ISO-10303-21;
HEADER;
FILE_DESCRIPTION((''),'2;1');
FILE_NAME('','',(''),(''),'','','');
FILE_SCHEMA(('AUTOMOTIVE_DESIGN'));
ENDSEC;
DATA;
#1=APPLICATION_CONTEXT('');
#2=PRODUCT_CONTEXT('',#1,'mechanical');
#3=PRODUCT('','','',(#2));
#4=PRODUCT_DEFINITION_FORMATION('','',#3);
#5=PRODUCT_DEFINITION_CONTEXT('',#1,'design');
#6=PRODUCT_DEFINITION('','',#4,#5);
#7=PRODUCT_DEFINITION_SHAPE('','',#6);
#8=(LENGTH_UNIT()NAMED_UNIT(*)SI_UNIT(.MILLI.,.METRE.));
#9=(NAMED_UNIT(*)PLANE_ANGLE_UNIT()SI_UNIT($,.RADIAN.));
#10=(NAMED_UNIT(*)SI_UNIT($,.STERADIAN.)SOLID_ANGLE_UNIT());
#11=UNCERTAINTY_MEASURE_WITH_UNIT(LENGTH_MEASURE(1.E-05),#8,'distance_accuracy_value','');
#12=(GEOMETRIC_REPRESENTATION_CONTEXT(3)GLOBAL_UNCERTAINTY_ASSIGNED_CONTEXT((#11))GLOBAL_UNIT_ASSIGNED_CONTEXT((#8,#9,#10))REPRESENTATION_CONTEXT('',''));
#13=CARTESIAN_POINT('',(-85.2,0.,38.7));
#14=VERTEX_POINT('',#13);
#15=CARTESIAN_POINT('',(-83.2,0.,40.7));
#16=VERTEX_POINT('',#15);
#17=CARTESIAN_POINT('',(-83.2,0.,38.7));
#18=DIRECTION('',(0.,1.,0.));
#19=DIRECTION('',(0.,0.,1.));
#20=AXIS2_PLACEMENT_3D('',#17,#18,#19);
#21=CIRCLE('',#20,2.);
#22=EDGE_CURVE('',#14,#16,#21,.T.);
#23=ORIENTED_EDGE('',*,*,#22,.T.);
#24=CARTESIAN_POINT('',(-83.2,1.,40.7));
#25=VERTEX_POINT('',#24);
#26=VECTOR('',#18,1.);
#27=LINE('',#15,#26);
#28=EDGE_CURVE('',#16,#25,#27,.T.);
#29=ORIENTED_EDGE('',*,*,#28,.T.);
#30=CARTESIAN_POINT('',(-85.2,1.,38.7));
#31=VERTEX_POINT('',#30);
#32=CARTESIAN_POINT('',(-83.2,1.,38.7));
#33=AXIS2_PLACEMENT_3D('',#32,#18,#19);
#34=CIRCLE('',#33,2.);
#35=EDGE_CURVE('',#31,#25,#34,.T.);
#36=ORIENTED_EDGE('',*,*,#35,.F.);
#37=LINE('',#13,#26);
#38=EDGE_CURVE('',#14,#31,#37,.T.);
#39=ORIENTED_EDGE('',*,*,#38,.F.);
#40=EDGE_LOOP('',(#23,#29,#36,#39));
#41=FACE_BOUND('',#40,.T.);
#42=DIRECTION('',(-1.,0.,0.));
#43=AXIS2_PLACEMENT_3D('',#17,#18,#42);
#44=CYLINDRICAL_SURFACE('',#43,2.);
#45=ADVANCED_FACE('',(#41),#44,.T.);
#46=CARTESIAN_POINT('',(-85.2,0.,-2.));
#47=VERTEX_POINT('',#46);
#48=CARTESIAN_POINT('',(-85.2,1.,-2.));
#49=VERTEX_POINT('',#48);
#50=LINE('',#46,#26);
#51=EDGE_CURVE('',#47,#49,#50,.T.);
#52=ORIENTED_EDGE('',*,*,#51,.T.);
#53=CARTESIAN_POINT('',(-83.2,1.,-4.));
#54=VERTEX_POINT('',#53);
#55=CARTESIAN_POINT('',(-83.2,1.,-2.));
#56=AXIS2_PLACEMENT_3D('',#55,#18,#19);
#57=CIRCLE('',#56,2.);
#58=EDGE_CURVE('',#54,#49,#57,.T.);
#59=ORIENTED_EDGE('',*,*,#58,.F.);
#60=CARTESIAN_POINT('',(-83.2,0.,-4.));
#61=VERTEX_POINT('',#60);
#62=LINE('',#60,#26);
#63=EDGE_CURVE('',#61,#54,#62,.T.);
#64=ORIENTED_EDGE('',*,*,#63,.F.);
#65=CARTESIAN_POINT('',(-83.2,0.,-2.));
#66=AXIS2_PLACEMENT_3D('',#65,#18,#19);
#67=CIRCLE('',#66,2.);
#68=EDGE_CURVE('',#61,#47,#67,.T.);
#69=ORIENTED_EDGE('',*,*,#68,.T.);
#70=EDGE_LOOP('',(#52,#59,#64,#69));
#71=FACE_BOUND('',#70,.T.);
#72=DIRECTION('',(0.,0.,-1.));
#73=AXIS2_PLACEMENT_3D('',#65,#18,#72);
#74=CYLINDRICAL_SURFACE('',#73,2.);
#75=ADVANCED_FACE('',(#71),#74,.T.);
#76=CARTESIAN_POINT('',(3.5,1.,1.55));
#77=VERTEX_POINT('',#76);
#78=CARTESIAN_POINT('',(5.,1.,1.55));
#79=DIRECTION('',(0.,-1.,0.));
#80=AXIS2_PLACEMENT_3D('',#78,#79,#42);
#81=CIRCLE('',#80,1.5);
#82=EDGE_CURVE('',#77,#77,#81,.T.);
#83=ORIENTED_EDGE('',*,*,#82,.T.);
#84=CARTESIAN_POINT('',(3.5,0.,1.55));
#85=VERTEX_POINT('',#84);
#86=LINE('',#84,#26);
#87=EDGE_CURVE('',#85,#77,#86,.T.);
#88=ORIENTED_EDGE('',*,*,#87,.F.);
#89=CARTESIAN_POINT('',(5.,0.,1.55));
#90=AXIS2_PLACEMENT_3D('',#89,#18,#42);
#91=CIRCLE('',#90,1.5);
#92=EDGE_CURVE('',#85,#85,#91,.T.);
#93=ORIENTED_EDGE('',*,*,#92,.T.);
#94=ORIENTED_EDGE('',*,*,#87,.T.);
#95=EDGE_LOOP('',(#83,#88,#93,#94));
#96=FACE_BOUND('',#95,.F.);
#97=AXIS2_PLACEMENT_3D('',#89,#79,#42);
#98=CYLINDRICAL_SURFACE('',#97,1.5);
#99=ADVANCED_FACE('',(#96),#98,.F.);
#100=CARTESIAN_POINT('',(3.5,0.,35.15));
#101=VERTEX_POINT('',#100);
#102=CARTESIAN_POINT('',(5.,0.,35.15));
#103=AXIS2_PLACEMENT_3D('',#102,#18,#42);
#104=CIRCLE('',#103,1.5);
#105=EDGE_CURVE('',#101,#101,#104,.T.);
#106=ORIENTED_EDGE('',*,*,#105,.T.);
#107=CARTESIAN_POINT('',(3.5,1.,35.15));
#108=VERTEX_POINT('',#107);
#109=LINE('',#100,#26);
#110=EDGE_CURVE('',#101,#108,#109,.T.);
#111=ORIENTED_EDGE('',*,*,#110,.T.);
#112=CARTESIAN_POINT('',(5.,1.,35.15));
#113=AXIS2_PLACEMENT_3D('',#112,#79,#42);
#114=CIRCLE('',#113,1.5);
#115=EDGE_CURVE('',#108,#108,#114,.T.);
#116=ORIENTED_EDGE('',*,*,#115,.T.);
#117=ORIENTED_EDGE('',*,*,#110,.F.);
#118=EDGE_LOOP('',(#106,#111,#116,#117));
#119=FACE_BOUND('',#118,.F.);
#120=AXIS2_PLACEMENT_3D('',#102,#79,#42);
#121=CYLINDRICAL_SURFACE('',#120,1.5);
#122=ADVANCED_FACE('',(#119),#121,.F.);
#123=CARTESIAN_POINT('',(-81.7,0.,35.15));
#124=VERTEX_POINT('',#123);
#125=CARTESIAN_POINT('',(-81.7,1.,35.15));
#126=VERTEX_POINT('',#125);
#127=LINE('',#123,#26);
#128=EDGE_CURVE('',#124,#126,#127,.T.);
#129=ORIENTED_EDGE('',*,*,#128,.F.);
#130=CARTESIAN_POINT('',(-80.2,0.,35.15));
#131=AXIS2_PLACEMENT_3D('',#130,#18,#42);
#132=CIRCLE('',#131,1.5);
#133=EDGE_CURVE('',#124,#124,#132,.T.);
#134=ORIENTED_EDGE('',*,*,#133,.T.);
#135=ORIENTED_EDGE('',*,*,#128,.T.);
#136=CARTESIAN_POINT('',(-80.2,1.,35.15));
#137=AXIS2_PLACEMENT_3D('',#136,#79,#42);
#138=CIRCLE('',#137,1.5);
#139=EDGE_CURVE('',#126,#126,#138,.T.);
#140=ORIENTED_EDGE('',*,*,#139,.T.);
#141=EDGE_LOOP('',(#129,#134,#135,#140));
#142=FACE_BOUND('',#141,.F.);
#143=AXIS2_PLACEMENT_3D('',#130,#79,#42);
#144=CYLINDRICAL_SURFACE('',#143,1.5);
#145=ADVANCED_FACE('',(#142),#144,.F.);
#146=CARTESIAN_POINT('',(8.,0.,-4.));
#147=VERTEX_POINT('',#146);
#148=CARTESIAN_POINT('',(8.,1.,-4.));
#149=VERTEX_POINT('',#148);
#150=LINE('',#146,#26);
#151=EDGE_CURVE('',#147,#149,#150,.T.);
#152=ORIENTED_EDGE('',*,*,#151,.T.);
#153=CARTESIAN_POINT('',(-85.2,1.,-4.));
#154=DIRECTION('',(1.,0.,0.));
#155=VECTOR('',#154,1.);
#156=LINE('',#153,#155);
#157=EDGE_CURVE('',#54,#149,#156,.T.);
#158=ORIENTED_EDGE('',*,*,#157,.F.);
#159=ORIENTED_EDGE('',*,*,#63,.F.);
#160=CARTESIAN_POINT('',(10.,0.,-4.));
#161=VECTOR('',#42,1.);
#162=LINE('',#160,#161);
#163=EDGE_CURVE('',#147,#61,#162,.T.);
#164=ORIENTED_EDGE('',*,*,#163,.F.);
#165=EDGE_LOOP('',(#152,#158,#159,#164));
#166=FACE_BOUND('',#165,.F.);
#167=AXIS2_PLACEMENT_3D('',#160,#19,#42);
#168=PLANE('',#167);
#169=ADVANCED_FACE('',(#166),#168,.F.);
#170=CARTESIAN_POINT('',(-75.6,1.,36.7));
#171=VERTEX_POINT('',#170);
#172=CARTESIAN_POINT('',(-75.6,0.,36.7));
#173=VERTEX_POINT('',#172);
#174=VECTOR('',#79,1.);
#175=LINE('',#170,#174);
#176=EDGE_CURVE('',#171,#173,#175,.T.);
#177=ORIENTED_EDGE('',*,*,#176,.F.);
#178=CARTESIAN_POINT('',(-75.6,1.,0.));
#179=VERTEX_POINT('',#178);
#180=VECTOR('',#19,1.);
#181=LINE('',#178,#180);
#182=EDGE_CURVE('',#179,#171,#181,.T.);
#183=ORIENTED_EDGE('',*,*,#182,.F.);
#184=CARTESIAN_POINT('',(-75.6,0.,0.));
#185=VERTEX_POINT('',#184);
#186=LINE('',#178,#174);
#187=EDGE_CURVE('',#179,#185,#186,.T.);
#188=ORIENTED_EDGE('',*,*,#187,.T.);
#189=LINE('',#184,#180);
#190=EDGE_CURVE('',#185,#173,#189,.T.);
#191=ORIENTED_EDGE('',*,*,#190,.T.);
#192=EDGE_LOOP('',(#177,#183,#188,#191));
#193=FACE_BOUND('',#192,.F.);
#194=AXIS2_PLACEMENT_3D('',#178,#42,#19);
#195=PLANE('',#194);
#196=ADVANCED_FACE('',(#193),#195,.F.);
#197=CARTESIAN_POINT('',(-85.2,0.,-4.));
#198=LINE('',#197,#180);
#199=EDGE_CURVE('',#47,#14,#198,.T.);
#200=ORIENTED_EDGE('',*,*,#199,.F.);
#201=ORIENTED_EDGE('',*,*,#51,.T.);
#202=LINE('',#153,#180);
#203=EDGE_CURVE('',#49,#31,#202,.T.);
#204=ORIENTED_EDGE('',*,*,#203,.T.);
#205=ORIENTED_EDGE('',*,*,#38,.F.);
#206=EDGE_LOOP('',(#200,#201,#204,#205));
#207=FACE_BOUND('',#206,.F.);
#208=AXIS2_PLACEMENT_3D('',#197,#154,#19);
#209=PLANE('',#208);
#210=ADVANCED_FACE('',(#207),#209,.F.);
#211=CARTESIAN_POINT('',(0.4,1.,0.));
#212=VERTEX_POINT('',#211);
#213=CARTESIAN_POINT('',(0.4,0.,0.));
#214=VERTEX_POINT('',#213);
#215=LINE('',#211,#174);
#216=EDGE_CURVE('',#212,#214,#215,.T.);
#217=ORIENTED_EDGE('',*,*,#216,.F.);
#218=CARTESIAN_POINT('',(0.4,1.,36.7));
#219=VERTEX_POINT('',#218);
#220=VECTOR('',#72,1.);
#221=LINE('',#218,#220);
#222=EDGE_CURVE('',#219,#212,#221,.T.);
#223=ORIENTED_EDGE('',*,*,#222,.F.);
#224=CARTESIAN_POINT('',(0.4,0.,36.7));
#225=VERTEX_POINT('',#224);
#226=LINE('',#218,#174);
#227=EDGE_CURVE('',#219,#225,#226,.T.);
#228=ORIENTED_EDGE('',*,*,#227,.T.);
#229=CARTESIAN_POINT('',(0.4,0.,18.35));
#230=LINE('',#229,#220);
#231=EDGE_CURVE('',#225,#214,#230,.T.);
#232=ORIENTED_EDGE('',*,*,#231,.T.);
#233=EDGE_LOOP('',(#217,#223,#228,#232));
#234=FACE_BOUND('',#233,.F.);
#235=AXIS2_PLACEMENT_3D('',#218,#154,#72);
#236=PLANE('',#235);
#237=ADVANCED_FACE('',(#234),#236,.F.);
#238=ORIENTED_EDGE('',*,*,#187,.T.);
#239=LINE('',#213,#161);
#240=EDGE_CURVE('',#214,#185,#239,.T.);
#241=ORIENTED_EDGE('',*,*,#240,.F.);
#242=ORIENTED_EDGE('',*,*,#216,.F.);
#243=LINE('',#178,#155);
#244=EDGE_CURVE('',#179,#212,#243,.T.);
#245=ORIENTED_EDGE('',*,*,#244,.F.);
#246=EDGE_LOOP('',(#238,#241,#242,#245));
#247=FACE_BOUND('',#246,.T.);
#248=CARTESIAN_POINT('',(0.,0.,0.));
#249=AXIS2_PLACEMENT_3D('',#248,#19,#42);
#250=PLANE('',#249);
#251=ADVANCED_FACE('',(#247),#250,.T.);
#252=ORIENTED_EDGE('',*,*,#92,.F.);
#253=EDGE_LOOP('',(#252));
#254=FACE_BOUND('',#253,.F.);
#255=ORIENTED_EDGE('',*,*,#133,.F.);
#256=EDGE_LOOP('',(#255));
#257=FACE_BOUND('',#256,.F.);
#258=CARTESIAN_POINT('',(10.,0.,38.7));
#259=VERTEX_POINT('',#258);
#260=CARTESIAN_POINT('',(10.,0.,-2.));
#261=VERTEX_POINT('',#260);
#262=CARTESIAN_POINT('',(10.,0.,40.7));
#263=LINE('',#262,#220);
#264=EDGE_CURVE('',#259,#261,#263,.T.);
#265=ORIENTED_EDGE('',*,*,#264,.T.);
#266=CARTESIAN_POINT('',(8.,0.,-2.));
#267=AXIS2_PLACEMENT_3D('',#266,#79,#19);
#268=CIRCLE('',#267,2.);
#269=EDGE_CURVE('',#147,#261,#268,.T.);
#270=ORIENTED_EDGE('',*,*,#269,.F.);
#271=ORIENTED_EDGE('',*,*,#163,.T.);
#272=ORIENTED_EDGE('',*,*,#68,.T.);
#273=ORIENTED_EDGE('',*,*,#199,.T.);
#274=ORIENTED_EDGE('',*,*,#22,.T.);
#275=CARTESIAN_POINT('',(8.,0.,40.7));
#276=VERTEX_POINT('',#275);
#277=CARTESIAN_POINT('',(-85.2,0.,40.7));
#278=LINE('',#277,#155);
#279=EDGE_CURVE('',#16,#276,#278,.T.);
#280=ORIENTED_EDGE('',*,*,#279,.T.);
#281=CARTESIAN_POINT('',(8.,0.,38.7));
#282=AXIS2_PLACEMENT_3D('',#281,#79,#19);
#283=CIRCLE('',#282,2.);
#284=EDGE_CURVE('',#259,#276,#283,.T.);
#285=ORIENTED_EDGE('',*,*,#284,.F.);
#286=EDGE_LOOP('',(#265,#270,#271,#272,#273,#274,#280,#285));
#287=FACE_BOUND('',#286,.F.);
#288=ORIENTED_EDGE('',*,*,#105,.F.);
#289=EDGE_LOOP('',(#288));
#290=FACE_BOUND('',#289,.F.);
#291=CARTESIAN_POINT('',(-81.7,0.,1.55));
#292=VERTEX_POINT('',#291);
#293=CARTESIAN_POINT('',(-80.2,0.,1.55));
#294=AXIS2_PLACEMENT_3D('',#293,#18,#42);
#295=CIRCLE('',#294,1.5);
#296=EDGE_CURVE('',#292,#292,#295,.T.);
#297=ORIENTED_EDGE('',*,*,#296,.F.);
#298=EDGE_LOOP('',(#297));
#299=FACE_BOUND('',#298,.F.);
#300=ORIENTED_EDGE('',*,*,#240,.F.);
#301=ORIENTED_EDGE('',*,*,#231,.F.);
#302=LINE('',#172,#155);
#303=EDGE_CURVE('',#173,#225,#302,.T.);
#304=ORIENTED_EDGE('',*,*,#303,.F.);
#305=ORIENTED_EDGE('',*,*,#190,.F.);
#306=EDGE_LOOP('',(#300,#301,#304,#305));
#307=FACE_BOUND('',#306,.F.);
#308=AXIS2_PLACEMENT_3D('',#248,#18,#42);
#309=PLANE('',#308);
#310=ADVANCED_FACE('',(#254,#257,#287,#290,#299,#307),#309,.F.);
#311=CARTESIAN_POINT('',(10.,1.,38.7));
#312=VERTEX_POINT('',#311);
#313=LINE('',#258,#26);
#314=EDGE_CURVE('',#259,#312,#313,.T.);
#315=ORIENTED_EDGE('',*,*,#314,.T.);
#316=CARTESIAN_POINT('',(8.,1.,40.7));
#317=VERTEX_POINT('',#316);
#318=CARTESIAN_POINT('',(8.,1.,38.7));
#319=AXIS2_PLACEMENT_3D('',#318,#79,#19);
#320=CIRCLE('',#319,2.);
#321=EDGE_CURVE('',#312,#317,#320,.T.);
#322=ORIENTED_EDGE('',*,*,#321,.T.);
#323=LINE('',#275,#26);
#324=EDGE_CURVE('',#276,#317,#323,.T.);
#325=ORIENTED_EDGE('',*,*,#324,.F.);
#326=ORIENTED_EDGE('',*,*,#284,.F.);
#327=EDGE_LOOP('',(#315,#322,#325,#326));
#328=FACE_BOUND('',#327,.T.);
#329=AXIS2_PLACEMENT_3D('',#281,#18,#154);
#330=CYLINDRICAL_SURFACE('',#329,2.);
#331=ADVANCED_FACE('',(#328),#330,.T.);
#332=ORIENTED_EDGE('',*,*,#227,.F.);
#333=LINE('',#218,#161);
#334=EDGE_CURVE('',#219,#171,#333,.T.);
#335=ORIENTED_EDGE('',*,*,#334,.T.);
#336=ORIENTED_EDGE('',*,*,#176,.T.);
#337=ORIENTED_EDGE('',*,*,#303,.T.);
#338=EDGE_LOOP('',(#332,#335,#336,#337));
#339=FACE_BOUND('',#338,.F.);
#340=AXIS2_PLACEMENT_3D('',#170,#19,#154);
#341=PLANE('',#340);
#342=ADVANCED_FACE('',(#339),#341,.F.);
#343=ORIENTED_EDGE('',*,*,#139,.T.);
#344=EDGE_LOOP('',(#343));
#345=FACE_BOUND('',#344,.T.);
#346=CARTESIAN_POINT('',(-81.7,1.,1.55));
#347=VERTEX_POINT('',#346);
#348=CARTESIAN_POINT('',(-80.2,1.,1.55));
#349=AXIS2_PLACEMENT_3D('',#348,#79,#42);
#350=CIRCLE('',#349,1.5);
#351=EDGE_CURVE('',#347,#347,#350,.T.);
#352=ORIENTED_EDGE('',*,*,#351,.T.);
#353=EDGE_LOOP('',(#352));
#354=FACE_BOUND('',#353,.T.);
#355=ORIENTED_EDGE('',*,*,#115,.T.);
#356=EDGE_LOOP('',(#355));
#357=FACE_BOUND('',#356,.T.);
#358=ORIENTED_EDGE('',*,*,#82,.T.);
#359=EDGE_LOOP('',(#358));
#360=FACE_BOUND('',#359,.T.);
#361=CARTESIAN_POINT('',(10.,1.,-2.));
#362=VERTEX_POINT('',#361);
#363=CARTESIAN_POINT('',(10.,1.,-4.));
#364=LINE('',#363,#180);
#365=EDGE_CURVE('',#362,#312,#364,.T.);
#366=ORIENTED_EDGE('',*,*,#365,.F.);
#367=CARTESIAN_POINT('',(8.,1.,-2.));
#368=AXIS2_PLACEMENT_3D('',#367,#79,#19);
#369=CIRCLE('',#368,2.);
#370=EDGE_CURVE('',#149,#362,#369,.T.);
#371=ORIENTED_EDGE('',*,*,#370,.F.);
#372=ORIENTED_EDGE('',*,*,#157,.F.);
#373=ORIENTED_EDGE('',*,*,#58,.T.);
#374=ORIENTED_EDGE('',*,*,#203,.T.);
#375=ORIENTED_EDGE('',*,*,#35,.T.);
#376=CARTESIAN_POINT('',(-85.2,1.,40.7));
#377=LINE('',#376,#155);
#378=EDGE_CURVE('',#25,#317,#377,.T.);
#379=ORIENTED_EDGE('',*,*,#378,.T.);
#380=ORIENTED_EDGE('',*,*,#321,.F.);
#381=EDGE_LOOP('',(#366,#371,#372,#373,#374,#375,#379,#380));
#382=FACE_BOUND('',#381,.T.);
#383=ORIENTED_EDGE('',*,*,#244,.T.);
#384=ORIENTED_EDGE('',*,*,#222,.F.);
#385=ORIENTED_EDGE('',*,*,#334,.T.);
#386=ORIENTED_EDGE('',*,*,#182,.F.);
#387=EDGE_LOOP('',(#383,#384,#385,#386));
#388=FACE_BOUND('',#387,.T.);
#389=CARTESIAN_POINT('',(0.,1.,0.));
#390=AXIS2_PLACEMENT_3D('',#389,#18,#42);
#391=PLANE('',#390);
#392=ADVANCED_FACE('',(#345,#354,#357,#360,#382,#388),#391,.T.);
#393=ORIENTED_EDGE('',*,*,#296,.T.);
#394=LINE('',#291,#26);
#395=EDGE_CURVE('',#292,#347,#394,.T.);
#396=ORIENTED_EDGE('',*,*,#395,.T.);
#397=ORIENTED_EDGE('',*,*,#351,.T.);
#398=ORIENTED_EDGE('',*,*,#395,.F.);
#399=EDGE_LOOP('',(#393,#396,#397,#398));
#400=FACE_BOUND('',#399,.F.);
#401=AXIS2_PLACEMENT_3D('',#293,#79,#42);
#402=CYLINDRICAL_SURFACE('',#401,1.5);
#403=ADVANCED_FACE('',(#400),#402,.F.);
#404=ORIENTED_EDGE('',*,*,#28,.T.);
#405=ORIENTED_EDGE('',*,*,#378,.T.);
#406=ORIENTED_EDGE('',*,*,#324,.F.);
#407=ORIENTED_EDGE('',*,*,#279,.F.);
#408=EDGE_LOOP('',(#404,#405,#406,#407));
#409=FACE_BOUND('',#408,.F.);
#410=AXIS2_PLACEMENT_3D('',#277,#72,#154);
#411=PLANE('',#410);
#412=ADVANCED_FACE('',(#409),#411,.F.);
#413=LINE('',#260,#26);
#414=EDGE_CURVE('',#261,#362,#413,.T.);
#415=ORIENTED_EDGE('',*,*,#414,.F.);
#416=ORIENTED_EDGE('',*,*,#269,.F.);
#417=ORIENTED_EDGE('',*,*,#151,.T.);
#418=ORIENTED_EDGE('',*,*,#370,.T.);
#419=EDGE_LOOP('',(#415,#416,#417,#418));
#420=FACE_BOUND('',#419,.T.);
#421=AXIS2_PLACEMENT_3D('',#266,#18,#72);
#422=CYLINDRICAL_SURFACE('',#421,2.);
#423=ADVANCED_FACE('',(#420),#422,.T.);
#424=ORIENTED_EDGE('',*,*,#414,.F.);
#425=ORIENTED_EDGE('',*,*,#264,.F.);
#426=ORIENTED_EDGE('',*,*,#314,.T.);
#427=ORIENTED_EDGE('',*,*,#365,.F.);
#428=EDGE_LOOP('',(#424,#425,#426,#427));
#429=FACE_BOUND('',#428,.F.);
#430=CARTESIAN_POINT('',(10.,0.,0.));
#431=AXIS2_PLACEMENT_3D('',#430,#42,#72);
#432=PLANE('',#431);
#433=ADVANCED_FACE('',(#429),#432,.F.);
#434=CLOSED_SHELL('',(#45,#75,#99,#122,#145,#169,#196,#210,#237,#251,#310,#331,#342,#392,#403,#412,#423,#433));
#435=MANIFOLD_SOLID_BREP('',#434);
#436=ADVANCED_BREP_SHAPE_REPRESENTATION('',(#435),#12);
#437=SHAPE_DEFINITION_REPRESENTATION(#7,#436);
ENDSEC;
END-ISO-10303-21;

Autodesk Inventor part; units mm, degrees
ref_plane "YZ Plane" through (0, 0, 0) normal (1, 0, 0) x (0, 1, 0)
ref_plane "XZ Plane" through (0, 0, 0) normal (0, 1, 0) x (-1, 0, 0)
ref_plane "XY Plane" through (0, 0, 0) normal (0, 0, 1) x (1, 0, 0)
sketch "Эскиз1" plane through (0, 0, 0) normal (0, 1, 0) x (-1, 0, 0)
  line L0 (0, 0) -> (75.2, 0)
  line L1 (75.2, 0) -> (75.2, 36.7)
  line L2 (75.2, 36.7) -> (0, 36.7)
  line L3 (0, 36.7) -> (0, 0)
  line L4 (0, 0) -> (-10, 0)
  line L5 (-10, 0) -> (-10, -4)
  line L6 (-10, -4) -> (0, -4)
  line L7 (0, -4) -> (0, 0)
  line L8 (-10, -4) -> (85.2, -4)
  line L9 (85.2, -4) -> (85.2, 40.7)
  line L10 (85.2, 40.7) -> (-10, 40.7)
  line L11 (-10, 40.7) -> (-10, -4)
  line L12 (75.2, 36.7) -> (80.2, 36.7)
  line L13 (80.2, 36.7) -> (80.2, 0)
  line L14 (80.2, 0) -> (80.2, 36.7)
  line L15 (80.2, 36.7) -> (80.2, 35.15)
  line L16 (80.2, 0) -> (80.2, 1.55)
  line L17 (0, 0) -> (-5, 0)
  line L18 (-5, 0) -> (-5, 1.55)
  line L19 (-5, 1.55) -> (-5, 36.7)
  line L20 (-5, 36.7) -> (-5, 35.15)
  circle A0 centre (-5, 35.15) radius 1.5
  circle A1 centre (-5, 1.55) radius 1.5
  circle A2 centre (80.2, 35.15) radius 1.5
  circle A3 centre (80.2, 1.55) radius 1.5
  dimension "d0" = 75.2
  dimension "d1" = 36.7
  dimension "d2" = 10
  dimension "d3" = 4
  dimension "d4" = 95.2
  dimension "d5" = 44.7
  dimension "d6" = 5
  dimension "d7" = 1.55
  dimension "d8" = 1.55
  dimension "d9" = 5
  dimension "d10" = 1.55
  dimension "d11" = 1.55
  dimension "d12" = 3
  dimension "d13" = 3
  dimension "d14" = 3
  dimension "d15" = 3
extrude "Выдавливание1" add sketch "Эскиз1" along normal blind 1
fillet "Сопряжение1" radius 2 4 edges at (-85.2, 0.5, 40.7) (-85.2, 0.5, -4) (10, 0.5, -4) (10, 0.5, 40.7)
sketch "Эскиз2" plane through (0, 1, 0) normal (0, 1, 0) x (1, 0, 0)
  line L0 (0, 0) -> (0.4, 0)
  line L1 (0.4, 0) -> (-75.6, 0)
  line L2 (-75.6, 0) -> (-75.6, -36.7)
  line L3 (-75.6, -36.7) -> (0.4, -36.7)
  line L4 (0.4, -36.7) -> (0.4, 0)
  dimension "d19" = 0.4
  dimension "d20" = 76
extrude "Выдавливание2" cut sketch "Эскиз2" against normal blind 10
properties part number "metal_holder" material "Серебро"
